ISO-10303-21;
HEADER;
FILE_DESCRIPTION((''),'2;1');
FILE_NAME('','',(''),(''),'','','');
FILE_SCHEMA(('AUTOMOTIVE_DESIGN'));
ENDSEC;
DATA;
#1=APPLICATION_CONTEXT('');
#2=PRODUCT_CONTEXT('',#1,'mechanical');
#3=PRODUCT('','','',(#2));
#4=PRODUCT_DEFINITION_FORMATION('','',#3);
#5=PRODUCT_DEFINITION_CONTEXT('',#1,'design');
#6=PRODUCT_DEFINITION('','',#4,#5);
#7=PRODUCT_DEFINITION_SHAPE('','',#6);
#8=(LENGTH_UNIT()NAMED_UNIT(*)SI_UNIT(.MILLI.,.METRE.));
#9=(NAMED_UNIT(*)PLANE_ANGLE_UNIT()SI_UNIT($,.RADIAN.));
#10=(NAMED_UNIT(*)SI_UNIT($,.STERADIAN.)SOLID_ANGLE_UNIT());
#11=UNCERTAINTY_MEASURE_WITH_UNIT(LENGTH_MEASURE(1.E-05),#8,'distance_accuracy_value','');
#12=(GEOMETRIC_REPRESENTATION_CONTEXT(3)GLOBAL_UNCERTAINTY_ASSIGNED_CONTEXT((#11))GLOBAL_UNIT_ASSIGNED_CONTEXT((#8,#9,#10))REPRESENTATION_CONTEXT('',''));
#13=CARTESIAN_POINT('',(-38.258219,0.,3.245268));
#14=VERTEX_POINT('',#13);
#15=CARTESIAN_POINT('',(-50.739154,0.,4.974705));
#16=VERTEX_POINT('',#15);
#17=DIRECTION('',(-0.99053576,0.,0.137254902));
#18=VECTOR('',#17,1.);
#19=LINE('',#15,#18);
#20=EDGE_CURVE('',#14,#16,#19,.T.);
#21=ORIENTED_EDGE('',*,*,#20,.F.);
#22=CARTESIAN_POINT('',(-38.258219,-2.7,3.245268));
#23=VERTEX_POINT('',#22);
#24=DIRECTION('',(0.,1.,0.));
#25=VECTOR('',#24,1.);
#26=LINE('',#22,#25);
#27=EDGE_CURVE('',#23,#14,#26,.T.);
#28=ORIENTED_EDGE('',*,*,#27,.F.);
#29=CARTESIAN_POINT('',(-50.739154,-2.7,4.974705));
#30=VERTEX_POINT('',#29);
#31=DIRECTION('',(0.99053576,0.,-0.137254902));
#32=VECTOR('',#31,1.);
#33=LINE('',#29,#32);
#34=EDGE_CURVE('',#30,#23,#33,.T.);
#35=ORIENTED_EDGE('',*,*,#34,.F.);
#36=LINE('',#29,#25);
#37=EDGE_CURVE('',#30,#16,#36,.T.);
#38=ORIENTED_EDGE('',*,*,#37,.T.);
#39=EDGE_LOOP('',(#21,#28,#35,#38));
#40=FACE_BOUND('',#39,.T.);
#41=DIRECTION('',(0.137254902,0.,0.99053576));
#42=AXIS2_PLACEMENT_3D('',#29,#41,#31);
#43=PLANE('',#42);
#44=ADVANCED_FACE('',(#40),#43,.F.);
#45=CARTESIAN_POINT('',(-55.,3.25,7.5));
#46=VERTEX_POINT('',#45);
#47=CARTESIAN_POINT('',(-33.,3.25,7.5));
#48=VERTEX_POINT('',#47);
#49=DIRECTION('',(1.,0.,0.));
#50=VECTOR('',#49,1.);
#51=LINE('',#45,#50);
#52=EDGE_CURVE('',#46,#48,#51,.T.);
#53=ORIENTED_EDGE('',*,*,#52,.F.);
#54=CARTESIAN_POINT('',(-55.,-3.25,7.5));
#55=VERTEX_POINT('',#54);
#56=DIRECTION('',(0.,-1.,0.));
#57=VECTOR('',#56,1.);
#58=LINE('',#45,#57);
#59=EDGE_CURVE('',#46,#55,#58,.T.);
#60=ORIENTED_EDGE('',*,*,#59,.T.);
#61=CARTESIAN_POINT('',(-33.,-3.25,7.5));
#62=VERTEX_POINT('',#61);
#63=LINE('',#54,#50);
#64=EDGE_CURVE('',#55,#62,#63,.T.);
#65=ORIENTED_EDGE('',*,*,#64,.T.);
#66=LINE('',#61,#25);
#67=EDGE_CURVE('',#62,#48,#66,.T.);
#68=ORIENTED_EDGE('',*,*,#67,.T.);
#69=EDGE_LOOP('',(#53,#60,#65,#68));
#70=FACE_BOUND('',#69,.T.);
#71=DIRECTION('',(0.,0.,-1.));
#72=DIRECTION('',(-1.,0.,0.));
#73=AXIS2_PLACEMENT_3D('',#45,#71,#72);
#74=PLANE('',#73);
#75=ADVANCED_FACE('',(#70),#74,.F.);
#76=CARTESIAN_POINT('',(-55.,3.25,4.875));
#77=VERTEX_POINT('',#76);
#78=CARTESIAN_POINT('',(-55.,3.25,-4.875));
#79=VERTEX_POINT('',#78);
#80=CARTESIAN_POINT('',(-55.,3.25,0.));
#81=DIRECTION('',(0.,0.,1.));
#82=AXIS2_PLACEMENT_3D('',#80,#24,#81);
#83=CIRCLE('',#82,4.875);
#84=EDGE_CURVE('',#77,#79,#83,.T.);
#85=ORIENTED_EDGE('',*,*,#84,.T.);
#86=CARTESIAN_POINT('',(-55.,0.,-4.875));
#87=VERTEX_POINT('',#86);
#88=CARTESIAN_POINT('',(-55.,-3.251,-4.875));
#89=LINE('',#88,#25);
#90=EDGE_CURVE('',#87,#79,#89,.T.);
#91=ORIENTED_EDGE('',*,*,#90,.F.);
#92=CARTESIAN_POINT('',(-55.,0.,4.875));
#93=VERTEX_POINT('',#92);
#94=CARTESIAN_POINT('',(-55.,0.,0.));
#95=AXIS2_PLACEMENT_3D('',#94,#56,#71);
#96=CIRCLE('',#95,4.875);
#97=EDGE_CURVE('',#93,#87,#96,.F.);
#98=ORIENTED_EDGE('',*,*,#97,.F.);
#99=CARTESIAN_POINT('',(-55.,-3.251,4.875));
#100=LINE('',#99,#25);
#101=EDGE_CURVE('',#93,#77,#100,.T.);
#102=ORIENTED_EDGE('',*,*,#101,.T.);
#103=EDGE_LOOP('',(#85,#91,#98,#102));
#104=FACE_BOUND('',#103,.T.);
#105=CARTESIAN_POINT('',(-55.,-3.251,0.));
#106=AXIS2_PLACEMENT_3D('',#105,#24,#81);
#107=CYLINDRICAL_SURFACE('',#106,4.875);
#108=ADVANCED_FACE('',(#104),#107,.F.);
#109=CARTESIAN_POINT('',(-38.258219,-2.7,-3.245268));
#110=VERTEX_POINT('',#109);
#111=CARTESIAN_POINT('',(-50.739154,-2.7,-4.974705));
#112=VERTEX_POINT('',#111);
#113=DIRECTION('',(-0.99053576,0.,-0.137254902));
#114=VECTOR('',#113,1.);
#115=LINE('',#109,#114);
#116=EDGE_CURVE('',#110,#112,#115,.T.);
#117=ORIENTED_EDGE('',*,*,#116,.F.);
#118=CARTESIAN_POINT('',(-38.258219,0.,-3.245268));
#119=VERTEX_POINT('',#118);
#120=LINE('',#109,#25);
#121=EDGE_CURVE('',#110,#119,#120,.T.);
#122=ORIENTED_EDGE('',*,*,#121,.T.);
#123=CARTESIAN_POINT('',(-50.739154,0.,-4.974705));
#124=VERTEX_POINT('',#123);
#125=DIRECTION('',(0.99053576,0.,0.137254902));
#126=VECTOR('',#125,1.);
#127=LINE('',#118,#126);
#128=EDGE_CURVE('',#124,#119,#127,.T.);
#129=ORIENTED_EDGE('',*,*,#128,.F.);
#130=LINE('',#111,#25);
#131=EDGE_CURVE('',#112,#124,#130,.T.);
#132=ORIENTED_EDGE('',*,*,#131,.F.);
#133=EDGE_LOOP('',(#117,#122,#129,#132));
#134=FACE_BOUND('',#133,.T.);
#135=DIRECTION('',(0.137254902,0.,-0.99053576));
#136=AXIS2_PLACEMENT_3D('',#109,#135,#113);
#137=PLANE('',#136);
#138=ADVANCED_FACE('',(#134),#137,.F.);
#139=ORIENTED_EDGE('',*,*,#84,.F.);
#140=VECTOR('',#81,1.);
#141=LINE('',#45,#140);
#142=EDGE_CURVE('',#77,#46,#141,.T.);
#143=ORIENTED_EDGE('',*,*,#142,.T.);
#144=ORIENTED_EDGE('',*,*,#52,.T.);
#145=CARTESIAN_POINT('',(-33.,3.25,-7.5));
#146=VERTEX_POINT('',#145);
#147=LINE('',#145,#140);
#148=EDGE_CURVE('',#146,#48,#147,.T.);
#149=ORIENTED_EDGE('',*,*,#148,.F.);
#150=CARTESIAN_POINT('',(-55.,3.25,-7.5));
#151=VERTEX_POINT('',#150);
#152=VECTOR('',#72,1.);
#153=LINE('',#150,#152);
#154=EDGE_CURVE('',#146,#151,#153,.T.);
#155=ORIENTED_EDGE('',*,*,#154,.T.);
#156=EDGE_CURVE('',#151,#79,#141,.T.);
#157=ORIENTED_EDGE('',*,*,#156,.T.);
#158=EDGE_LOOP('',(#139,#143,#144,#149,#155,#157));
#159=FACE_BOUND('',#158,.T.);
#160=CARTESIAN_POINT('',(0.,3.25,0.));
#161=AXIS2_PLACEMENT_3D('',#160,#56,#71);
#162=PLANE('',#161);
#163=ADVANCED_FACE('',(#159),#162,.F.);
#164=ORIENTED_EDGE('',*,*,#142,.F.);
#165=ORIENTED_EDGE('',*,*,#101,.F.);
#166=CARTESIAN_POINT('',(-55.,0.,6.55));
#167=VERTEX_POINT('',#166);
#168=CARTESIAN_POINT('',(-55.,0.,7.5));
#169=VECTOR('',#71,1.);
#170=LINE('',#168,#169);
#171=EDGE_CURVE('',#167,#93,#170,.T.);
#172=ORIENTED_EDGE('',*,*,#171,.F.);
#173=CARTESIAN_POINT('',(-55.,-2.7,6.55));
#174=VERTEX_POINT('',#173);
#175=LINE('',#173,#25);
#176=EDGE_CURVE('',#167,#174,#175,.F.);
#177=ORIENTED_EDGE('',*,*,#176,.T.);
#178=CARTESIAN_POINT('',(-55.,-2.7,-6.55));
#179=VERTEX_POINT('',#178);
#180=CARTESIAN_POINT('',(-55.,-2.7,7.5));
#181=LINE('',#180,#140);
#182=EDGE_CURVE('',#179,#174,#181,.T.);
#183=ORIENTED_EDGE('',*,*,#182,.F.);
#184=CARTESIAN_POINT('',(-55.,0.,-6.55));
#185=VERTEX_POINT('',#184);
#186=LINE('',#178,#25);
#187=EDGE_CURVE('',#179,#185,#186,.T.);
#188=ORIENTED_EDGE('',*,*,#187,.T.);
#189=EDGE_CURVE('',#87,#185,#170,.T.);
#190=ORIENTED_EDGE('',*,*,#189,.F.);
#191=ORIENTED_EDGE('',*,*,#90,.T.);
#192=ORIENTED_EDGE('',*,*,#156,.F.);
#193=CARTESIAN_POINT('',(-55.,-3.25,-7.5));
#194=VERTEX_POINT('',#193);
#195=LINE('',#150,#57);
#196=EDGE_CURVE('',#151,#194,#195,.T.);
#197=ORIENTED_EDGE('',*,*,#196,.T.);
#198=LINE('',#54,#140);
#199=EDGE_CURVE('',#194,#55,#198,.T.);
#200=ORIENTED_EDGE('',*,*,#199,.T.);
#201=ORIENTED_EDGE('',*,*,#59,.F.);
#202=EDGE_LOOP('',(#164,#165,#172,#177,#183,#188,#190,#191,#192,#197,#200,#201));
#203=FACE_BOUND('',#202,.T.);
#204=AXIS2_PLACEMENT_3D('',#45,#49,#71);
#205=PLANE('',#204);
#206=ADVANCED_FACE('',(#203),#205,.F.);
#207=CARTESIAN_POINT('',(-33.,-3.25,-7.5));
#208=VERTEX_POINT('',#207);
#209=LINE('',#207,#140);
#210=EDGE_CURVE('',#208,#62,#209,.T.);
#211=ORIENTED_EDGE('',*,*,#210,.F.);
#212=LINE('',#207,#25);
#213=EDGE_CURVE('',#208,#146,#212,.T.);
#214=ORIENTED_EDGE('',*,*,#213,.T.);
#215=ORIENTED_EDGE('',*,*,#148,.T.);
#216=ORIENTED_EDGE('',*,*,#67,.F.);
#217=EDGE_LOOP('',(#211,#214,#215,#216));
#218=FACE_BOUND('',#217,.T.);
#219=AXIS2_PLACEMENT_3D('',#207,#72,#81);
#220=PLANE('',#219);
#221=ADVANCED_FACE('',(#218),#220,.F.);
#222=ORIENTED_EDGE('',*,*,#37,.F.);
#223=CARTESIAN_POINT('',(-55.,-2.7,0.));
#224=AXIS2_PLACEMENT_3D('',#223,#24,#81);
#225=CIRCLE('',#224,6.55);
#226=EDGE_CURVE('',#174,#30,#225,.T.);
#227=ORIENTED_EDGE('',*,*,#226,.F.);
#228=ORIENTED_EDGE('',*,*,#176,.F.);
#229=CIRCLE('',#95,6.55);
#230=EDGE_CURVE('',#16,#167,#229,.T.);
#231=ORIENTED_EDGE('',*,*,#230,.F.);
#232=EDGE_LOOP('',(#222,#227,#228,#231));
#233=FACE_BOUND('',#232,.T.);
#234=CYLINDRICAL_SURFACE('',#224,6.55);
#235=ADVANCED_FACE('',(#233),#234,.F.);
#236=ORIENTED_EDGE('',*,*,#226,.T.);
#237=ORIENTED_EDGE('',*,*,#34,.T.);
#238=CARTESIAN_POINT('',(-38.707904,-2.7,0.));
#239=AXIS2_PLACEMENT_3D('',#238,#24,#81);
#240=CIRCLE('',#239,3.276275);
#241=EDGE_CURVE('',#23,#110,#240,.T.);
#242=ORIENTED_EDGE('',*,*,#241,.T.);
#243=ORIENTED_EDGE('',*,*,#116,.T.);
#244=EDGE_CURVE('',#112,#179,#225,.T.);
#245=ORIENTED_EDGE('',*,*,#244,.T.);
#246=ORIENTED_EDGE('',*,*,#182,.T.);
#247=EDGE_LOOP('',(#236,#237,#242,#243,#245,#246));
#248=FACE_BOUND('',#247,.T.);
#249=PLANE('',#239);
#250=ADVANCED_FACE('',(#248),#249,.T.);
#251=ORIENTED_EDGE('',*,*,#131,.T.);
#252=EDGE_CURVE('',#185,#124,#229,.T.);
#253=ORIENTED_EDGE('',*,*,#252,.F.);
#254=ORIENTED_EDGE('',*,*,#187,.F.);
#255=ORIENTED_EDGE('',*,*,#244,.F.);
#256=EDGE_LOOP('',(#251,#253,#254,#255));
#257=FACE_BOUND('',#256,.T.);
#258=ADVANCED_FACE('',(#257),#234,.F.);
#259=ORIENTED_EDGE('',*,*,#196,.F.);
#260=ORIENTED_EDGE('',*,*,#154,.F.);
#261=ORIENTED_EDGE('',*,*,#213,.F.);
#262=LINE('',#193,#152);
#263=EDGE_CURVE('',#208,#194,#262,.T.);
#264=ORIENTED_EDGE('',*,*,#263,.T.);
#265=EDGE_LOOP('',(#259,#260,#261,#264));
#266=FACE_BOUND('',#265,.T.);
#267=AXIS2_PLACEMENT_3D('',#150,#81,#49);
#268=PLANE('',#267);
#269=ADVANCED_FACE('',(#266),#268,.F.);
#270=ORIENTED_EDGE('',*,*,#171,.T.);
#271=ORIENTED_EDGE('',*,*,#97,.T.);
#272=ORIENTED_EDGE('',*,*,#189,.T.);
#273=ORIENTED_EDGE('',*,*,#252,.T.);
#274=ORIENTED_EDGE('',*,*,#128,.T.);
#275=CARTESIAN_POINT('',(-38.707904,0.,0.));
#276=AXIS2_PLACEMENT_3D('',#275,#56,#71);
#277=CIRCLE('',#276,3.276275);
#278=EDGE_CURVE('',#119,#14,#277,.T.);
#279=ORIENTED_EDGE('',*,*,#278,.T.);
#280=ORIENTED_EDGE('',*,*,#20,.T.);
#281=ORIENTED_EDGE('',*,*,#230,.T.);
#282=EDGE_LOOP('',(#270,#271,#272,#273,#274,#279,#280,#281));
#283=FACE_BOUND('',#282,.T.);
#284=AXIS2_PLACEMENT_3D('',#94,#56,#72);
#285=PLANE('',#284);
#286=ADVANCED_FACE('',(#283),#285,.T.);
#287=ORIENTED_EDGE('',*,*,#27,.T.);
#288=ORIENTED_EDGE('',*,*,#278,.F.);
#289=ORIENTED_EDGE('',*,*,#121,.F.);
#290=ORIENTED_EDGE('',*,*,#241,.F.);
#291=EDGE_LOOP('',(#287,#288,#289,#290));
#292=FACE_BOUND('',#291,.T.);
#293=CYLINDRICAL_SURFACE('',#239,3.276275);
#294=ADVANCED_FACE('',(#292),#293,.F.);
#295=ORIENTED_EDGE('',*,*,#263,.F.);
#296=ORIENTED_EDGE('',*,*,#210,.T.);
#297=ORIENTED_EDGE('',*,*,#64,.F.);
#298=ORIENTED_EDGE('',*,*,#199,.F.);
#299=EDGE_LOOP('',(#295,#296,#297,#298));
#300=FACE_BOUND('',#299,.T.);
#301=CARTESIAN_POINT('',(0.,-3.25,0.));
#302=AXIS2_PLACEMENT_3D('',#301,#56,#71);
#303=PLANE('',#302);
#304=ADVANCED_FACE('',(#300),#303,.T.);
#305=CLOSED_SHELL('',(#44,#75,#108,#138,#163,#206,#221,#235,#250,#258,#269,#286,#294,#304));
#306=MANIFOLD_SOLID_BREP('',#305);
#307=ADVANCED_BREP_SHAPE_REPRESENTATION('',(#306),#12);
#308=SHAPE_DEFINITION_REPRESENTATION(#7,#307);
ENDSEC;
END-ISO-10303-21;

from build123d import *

# Parameters (mm, degrees)
SKETCH2_W           = 110
SKETCH2_H           = 15
BOSS_EXTRUDE1_DEPTH = 3.25
CAVITY1_START       = -2.5
CAVITY1_DEPTH       = 2.5
CAVITY1_START_2     = -1.5
CAVITY1_2_DEPTH     = 4.75
CAVITY1_3_DEPTH     = 1.5
CUT_EXTRUDE1_START  = -5.75
CUT_EXTRUDE1_DEPTH  = 5.75
CUT_EXTRUDE2_START  = -1
CUT_EXTRUDE2_DEPTH  = 1
CUT_EXTRUDE3_START  = -0.2
CUT_EXTRUDE3_DEPTH  = 2.7
CUT_EXTRUDE4_REACH  = 57.888
SKETCH9_W           = 88
SKETCH9_H           = 15
CUT_EXTRUDE5_DEPTH  = 56.888281419


# Read off the part's stored shape, not the designer's step: Cavity1
with BuildPart() as part:
    # Sketch2 → Boss-Extrude1 (new, symmetric)
    with BuildSketch(Plane(origin=(0, 0, 0), x_dir=(1, 0, 0), z_dir=(0, 1, 0))):
        Rectangle(SKETCH2_W, SKETCH2_H)
    extrude(amount=BOSS_EXTRUDE1_DEPTH, both=True)

    # Cavity1 outline → Cavity1 (cut)
    with BuildSketch(Plane(origin=(0, 0, 0), x_dir=(1, 0, 0), z_dir=(0, 1, 0)).offset(CAVITY1_START)):
        with BuildLine():
            ThreePointArc((-55, 2.875), (-52.125, 0), (-55, -2.875))
            Line((-55, -2.875), (-55, -3.425))
            ThreePointArc((-55, -3.425), (-51.575, 0), (-55, 3.425))
            Line((-55, 3.425), (-55, 2.875))
        make_face()
        with BuildLine():
            Line((-55, 6.05), (-55, 4.5))
            ThreePointArc((-55, 4.5), (-50.5, 0), (-55, -4.5))
            Line((-55, -4.5), (-55, -6.05))
            ThreePointArc((-55, -6.05), (-52.834647835, -5.649225611), (-50.956177551, -4.5))
            Line((-50.956177551, -4.5), (-38.326846611, -2.75))
            ThreePointArc((-38.326846611, -2.75), (-35.931628674, 0), (-38.326846611, 2.75))
            Line((-38.326846611, 2.75), (-50.956177551, 4.5))
            ThreePointArc((-50.956177551, 4.5), (-52.834647835, 5.649225611), (-55, 6.05))
        make_face()
    extrude(amount=CAVITY1_DEPTH, mode=Mode.SUBTRACT)

    # Cavity1 2 outline → Cavity1 2 (cut)
    with BuildSketch(Plane(origin=(0, 0, 0), x_dir=(1, 0, 0), z_dir=(0, 1, 0)).offset(CAVITY1_START_2)):
        with BuildLine():
            ThreePointArc((-55, 3), (-52, 0), (-55, -3))
            Line((-55, -3), (-55, -4.375))
            ThreePointArc((-55, -4.375), (-50.625, 0), (-55, 4.375))
            Line((-55, 4.375), (-55, 3))
        make_face()
    extrude(amount=CAVITY1_2_DEPTH, mode=Mode.SUBTRACT)

    # Cavity1 3 outline → Cavity1 3 (cut)
    with BuildSketch(Plane(origin=(0, 0, 0), x_dir=(1, 0, 0), z_dir=(0, 1, 0)).offset(CAVITY1_START_2)):
        with BuildLine():
            Line((-55, 2.875), (-55, 1.5))
            ThreePointArc((-55, 1.5), (-53.5, 0), (-55, -1.5))
            Line((-55, -1.5), (-55, -2.875))
            ThreePointArc((-55, -2.875), (-52.125, 0), (-55, 2.875))
        make_face()
        with BuildLine():
            Line((-55, 4.5), (-55, 4.375))
            ThreePointArc((-55, 4.375), (-50.625, 0), (-55, -4.375))
            Line((-55, -4.375), (-55, -4.5))
            ThreePointArc((-55, -4.5), (-50.5, 0), (-55, 4.5))
        make_face()
    extrude(amount=CAVITY1_3_DEPTH, mode=Mode.SUBTRACT)

    # Sketch4 → Cut-Extrude1 (cut)
    with BuildSketch(Plane(origin=(0, 3.25, 0), x_dir=(1, 0, 0), z_dir=(0, 1, 0)).offset(CUT_EXTRUDE1_START)):
        with BuildLine():
            Line((-55, 3), (-55, -3))
            ThreePointArc((-55, -3), (-52, 0), (-55, 3))
        make_face()
    extrude(amount=CUT_EXTRUDE1_DEPTH, mode=Mode.SUBTRACT)

    # Sketch6 → Cut-Extrude2 (cut)
    with BuildSketch(Plane(origin=(0, -1.5, 0), x_dir=(1, 0, 0), z_dir=(0, 1, 0)).offset(CUT_EXTRUDE2_START)):
        with BuildLine():
            Line((-55, 4.5), (-55, 3.425))
            ThreePointArc((-55, 3.425), (-51.575, 0), (-55, -3.425))
            Line((-55, -3.425), (-55, -4.5))
            ThreePointArc((-55, -4.5), (-50.5, 0), (-55, 4.5))
        make_face()
    extrude(amount=CUT_EXTRUDE2_DEPTH, mode=Mode.SUBTRACT)

    # Sketch7 → Cut-Extrude3 (cut)
    with BuildSketch(Plane(origin=(0, -2.5, 0), x_dir=(1, 0, 0), z_dir=(0, 1, 0)).offset(CUT_EXTRUDE3_START)):
        with BuildLine():
            Line((-38.25821916, 3.24526788), (-50.739154033, 4.974705182))
            ThreePointArc((-50.739154033, 4.974705182), (-52.964952838, 6.225839947), (-55.5, 6.530888148))
            Line((-55.5, 6.530888148), (-55.5, -6.530888148))
            ThreePointArc((-55.5, -6.530888148), (-52.964952838, -6.225839947), (-50.739154033, -4.974705182))
            Line((-50.739154033, -4.974705182), (-38.25821916, -3.24526788))
            ThreePointArc((-38.25821916, -3.24526788), (-35.431628674, 0), (-38.25821916, 3.24526788))
        make_face()
    extrude(amount=CUT_EXTRUDE3_DEPTH, mode=Mode.SUBTRACT)

    # Sketch8 → Cut-Extrude4 (cut, up to next)
    with BuildSketch(Plane(origin=(0, 3.25, 0), x_dir=(1, 0, 0), z_dir=(0, 1, 0)), mode=Mode.PRIVATE) as cut_extrude4_sk1:
        with BuildLine():
            ThreePointArc((-55, 4.375), (-50.625, 0), (-55, -4.375))
            Line((-55, -4.375), (-55, -4.875))
            ThreePointArc((-55, -4.875), (-50.125, 0), (-55, 4.875))
            Line((-55, 4.875), (-55, 4.375))
        make_face()
    cut_extrude4_tool1 = extrude(cut_extrude4_sk1.sketch, amount=-CUT_EXTRUDE4_REACH, mode=Mode.PRIVATE) & part.part
    add(cut_extrude4_tool1.solids().sort_by_distance((-50.515992, 3.25, 0))[0], mode=Mode.SUBTRACT)

    # Sketch9 → Cut-Extrude5 (cut, through all)
    with BuildSketch(Plane(origin=(0, 3.25, 0), x_dir=(1, 0, 0), z_dir=(0, 1, 0))):
        with Locations((11, 0)):
            Rectangle(SKETCH9_W, SKETCH9_H)
    extrude(amount=-CUT_EXTRUDE5_DEPTH, mode=Mode.SUBTRACT)


solid = part.part
